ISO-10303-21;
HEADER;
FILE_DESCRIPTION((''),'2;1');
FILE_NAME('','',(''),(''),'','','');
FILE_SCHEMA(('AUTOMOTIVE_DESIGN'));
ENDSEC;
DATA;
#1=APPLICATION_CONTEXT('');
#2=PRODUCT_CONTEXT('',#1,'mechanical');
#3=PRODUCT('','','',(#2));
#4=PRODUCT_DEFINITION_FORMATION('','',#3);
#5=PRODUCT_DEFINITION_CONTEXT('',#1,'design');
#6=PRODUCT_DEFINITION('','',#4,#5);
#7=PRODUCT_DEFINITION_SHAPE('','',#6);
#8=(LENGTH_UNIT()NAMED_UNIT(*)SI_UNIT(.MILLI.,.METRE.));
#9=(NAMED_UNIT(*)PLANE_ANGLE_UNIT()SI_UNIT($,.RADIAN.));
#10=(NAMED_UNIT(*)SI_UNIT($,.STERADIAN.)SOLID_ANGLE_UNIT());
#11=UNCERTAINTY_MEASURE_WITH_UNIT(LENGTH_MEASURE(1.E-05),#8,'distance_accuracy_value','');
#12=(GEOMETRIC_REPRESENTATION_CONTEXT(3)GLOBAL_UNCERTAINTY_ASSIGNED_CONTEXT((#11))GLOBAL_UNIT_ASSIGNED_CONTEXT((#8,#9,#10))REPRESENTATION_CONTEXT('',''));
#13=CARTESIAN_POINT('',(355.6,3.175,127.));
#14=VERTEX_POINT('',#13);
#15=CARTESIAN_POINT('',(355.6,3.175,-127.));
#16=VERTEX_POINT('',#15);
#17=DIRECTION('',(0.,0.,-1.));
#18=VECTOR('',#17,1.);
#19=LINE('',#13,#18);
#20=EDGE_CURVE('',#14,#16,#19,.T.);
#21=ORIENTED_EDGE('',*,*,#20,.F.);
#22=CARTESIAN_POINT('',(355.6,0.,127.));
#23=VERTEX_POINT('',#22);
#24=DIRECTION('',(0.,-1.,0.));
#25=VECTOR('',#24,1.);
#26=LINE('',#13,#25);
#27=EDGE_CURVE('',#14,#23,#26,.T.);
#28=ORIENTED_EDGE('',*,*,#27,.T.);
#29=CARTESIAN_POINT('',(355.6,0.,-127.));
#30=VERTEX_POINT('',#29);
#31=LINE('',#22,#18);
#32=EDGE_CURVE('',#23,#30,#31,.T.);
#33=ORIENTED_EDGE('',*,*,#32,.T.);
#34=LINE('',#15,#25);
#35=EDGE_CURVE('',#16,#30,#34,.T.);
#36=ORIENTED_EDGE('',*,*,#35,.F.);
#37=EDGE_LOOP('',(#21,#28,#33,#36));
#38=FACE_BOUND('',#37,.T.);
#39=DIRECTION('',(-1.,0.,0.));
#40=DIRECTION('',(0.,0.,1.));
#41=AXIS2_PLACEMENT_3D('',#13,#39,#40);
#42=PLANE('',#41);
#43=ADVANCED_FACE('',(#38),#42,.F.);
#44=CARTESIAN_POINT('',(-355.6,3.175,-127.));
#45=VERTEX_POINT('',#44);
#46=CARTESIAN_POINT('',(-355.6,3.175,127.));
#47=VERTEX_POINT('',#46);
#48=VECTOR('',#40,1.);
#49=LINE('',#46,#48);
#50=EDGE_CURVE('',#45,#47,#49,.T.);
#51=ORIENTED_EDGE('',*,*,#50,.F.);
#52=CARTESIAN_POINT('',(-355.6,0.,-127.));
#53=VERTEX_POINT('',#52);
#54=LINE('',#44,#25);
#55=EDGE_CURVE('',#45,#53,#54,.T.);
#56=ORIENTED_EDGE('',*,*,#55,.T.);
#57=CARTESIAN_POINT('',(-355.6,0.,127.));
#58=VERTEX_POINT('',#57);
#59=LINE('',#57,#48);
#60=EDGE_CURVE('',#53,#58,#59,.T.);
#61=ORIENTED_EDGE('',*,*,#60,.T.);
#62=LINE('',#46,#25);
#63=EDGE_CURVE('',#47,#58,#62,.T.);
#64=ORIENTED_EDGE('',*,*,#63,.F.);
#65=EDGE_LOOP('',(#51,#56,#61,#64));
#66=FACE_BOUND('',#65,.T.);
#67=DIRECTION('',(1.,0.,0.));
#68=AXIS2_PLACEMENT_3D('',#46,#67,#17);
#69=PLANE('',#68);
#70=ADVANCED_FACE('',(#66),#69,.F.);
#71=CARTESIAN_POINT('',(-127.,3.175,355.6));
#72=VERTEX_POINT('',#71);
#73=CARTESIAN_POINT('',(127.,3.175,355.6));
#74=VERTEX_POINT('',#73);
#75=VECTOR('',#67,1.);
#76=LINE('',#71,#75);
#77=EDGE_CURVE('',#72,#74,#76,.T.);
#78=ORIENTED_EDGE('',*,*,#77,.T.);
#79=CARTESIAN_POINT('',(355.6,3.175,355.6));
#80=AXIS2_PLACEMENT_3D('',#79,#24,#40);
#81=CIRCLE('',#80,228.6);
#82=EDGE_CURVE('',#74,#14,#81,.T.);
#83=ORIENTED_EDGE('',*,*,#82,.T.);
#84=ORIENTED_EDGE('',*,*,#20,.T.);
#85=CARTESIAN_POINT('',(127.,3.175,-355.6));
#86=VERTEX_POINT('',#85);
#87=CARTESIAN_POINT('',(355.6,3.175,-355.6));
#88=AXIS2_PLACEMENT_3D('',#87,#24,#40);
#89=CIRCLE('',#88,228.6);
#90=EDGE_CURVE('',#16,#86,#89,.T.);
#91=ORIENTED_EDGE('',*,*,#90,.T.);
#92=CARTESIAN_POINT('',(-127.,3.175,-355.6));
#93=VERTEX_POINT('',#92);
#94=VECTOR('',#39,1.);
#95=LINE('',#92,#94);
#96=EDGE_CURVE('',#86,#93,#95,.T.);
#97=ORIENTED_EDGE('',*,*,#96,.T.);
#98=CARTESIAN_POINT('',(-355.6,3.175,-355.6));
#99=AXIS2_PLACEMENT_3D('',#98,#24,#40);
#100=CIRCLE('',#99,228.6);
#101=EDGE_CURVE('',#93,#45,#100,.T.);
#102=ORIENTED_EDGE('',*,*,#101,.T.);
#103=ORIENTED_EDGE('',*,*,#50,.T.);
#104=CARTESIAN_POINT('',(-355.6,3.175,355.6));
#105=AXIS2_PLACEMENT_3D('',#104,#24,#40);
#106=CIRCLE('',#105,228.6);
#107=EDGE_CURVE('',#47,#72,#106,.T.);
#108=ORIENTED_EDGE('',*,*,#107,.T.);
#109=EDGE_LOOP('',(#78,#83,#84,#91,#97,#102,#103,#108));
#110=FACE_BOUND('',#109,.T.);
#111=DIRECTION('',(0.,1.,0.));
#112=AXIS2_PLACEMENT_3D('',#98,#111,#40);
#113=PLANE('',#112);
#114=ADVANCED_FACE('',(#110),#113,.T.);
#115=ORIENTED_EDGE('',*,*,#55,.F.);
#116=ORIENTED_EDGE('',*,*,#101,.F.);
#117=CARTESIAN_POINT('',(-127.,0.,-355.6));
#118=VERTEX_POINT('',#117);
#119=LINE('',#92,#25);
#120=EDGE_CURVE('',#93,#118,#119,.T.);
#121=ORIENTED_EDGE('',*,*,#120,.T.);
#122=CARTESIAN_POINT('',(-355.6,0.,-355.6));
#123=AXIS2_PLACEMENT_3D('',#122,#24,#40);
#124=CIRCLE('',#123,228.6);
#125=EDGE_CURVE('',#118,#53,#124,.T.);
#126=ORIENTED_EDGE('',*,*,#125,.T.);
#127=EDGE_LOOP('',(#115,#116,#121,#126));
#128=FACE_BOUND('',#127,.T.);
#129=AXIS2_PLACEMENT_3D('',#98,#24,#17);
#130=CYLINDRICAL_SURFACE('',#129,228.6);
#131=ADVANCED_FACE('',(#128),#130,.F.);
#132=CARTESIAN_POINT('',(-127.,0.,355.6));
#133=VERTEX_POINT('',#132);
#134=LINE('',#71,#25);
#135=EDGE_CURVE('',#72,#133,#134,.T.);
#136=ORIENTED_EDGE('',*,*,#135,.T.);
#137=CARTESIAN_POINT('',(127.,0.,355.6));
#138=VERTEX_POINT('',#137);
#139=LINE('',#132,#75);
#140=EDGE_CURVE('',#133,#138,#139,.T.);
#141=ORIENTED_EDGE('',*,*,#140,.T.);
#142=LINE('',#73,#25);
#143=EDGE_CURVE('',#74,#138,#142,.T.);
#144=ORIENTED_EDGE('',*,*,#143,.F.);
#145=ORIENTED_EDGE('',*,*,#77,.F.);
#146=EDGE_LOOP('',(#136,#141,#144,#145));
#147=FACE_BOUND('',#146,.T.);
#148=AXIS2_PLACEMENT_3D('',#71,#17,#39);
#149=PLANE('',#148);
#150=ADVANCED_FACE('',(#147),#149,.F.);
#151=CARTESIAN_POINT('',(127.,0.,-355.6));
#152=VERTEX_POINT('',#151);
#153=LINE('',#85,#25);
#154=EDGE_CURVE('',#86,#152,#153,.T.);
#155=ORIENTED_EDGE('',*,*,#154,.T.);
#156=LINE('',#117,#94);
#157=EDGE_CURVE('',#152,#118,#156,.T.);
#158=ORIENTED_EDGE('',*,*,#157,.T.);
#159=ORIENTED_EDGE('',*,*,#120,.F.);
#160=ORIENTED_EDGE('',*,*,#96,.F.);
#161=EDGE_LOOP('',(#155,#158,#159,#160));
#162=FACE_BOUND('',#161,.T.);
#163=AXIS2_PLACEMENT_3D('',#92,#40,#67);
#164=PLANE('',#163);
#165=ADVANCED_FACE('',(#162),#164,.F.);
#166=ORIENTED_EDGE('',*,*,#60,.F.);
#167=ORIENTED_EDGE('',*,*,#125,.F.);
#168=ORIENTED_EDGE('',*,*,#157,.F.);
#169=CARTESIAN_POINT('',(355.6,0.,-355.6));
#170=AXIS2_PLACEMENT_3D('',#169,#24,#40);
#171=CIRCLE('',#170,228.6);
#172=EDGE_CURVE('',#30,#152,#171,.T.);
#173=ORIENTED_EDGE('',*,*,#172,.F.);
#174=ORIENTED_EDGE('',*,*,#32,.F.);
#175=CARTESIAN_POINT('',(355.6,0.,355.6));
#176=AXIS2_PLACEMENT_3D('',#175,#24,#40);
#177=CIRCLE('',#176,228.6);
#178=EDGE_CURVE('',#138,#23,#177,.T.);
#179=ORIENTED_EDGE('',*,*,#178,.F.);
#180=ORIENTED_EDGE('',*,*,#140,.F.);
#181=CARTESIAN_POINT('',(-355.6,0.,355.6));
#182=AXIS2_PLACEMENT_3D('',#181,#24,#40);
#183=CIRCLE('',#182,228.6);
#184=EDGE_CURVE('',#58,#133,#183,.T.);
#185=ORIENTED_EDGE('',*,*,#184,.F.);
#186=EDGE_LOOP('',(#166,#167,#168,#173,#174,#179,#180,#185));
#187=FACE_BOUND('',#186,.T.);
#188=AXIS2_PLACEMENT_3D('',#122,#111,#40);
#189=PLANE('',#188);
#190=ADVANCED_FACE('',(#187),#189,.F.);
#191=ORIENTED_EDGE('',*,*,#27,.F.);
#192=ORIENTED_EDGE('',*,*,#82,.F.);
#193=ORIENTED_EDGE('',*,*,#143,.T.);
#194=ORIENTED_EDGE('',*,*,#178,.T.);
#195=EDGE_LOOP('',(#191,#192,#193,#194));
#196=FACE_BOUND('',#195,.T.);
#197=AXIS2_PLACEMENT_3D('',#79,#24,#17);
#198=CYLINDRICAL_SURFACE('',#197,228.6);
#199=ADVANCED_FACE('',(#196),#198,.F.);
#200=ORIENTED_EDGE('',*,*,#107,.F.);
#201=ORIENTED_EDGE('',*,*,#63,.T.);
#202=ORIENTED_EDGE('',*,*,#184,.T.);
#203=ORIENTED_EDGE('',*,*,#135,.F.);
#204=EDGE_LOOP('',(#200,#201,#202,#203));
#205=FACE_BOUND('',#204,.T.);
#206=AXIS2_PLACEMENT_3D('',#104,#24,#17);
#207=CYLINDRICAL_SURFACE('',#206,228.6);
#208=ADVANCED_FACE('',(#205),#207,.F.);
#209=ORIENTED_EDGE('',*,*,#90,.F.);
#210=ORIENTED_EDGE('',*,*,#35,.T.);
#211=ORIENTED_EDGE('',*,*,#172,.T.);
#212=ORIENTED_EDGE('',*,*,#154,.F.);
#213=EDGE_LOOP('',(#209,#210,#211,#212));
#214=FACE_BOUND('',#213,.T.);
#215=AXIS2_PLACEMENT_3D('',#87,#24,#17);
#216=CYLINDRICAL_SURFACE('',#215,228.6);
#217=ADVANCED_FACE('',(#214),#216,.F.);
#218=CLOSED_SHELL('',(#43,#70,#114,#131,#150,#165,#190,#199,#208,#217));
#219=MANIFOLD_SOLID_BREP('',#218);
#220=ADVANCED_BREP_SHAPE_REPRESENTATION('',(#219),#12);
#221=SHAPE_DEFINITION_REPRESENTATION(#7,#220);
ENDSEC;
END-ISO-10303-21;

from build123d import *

# Parameters (mm, degrees)
BOSS_EXTRUDE1_DEPTH = 3.175


with BuildPart() as part:
    # Sketch1 → Boss-Extrude1 (new body)
    with BuildSketch(Plane(origin=(0, 0, 0), x_dir=(1, 0, 0), z_dir=(0, 1, 0))):
        with BuildLine():
            Line((-127, -355.6), (127, -355.6))
            ThreePointArc((127, -355.6), (193.955389821, -193.955389821), (355.6, -127))
            Line((355.6, -127), (355.6, 127))
            ThreePointArc((355.6, 127), (193.955389821, 193.955389821), (127, 355.6))
            Line((127, 355.6), (-127, 355.6))
            ThreePointArc((-127, 355.6), (-193.955389821, 193.955389821), (-355.6, 127))
            Line((-355.6, 127), (-355.6, -127))
            ThreePointArc((-355.6, -127), (-193.955389821, -193.955389821), (-127, -355.6))
        make_face()
    extrude(amount=BOSS_EXTRUDE1_DEPTH)


solid = part.part
